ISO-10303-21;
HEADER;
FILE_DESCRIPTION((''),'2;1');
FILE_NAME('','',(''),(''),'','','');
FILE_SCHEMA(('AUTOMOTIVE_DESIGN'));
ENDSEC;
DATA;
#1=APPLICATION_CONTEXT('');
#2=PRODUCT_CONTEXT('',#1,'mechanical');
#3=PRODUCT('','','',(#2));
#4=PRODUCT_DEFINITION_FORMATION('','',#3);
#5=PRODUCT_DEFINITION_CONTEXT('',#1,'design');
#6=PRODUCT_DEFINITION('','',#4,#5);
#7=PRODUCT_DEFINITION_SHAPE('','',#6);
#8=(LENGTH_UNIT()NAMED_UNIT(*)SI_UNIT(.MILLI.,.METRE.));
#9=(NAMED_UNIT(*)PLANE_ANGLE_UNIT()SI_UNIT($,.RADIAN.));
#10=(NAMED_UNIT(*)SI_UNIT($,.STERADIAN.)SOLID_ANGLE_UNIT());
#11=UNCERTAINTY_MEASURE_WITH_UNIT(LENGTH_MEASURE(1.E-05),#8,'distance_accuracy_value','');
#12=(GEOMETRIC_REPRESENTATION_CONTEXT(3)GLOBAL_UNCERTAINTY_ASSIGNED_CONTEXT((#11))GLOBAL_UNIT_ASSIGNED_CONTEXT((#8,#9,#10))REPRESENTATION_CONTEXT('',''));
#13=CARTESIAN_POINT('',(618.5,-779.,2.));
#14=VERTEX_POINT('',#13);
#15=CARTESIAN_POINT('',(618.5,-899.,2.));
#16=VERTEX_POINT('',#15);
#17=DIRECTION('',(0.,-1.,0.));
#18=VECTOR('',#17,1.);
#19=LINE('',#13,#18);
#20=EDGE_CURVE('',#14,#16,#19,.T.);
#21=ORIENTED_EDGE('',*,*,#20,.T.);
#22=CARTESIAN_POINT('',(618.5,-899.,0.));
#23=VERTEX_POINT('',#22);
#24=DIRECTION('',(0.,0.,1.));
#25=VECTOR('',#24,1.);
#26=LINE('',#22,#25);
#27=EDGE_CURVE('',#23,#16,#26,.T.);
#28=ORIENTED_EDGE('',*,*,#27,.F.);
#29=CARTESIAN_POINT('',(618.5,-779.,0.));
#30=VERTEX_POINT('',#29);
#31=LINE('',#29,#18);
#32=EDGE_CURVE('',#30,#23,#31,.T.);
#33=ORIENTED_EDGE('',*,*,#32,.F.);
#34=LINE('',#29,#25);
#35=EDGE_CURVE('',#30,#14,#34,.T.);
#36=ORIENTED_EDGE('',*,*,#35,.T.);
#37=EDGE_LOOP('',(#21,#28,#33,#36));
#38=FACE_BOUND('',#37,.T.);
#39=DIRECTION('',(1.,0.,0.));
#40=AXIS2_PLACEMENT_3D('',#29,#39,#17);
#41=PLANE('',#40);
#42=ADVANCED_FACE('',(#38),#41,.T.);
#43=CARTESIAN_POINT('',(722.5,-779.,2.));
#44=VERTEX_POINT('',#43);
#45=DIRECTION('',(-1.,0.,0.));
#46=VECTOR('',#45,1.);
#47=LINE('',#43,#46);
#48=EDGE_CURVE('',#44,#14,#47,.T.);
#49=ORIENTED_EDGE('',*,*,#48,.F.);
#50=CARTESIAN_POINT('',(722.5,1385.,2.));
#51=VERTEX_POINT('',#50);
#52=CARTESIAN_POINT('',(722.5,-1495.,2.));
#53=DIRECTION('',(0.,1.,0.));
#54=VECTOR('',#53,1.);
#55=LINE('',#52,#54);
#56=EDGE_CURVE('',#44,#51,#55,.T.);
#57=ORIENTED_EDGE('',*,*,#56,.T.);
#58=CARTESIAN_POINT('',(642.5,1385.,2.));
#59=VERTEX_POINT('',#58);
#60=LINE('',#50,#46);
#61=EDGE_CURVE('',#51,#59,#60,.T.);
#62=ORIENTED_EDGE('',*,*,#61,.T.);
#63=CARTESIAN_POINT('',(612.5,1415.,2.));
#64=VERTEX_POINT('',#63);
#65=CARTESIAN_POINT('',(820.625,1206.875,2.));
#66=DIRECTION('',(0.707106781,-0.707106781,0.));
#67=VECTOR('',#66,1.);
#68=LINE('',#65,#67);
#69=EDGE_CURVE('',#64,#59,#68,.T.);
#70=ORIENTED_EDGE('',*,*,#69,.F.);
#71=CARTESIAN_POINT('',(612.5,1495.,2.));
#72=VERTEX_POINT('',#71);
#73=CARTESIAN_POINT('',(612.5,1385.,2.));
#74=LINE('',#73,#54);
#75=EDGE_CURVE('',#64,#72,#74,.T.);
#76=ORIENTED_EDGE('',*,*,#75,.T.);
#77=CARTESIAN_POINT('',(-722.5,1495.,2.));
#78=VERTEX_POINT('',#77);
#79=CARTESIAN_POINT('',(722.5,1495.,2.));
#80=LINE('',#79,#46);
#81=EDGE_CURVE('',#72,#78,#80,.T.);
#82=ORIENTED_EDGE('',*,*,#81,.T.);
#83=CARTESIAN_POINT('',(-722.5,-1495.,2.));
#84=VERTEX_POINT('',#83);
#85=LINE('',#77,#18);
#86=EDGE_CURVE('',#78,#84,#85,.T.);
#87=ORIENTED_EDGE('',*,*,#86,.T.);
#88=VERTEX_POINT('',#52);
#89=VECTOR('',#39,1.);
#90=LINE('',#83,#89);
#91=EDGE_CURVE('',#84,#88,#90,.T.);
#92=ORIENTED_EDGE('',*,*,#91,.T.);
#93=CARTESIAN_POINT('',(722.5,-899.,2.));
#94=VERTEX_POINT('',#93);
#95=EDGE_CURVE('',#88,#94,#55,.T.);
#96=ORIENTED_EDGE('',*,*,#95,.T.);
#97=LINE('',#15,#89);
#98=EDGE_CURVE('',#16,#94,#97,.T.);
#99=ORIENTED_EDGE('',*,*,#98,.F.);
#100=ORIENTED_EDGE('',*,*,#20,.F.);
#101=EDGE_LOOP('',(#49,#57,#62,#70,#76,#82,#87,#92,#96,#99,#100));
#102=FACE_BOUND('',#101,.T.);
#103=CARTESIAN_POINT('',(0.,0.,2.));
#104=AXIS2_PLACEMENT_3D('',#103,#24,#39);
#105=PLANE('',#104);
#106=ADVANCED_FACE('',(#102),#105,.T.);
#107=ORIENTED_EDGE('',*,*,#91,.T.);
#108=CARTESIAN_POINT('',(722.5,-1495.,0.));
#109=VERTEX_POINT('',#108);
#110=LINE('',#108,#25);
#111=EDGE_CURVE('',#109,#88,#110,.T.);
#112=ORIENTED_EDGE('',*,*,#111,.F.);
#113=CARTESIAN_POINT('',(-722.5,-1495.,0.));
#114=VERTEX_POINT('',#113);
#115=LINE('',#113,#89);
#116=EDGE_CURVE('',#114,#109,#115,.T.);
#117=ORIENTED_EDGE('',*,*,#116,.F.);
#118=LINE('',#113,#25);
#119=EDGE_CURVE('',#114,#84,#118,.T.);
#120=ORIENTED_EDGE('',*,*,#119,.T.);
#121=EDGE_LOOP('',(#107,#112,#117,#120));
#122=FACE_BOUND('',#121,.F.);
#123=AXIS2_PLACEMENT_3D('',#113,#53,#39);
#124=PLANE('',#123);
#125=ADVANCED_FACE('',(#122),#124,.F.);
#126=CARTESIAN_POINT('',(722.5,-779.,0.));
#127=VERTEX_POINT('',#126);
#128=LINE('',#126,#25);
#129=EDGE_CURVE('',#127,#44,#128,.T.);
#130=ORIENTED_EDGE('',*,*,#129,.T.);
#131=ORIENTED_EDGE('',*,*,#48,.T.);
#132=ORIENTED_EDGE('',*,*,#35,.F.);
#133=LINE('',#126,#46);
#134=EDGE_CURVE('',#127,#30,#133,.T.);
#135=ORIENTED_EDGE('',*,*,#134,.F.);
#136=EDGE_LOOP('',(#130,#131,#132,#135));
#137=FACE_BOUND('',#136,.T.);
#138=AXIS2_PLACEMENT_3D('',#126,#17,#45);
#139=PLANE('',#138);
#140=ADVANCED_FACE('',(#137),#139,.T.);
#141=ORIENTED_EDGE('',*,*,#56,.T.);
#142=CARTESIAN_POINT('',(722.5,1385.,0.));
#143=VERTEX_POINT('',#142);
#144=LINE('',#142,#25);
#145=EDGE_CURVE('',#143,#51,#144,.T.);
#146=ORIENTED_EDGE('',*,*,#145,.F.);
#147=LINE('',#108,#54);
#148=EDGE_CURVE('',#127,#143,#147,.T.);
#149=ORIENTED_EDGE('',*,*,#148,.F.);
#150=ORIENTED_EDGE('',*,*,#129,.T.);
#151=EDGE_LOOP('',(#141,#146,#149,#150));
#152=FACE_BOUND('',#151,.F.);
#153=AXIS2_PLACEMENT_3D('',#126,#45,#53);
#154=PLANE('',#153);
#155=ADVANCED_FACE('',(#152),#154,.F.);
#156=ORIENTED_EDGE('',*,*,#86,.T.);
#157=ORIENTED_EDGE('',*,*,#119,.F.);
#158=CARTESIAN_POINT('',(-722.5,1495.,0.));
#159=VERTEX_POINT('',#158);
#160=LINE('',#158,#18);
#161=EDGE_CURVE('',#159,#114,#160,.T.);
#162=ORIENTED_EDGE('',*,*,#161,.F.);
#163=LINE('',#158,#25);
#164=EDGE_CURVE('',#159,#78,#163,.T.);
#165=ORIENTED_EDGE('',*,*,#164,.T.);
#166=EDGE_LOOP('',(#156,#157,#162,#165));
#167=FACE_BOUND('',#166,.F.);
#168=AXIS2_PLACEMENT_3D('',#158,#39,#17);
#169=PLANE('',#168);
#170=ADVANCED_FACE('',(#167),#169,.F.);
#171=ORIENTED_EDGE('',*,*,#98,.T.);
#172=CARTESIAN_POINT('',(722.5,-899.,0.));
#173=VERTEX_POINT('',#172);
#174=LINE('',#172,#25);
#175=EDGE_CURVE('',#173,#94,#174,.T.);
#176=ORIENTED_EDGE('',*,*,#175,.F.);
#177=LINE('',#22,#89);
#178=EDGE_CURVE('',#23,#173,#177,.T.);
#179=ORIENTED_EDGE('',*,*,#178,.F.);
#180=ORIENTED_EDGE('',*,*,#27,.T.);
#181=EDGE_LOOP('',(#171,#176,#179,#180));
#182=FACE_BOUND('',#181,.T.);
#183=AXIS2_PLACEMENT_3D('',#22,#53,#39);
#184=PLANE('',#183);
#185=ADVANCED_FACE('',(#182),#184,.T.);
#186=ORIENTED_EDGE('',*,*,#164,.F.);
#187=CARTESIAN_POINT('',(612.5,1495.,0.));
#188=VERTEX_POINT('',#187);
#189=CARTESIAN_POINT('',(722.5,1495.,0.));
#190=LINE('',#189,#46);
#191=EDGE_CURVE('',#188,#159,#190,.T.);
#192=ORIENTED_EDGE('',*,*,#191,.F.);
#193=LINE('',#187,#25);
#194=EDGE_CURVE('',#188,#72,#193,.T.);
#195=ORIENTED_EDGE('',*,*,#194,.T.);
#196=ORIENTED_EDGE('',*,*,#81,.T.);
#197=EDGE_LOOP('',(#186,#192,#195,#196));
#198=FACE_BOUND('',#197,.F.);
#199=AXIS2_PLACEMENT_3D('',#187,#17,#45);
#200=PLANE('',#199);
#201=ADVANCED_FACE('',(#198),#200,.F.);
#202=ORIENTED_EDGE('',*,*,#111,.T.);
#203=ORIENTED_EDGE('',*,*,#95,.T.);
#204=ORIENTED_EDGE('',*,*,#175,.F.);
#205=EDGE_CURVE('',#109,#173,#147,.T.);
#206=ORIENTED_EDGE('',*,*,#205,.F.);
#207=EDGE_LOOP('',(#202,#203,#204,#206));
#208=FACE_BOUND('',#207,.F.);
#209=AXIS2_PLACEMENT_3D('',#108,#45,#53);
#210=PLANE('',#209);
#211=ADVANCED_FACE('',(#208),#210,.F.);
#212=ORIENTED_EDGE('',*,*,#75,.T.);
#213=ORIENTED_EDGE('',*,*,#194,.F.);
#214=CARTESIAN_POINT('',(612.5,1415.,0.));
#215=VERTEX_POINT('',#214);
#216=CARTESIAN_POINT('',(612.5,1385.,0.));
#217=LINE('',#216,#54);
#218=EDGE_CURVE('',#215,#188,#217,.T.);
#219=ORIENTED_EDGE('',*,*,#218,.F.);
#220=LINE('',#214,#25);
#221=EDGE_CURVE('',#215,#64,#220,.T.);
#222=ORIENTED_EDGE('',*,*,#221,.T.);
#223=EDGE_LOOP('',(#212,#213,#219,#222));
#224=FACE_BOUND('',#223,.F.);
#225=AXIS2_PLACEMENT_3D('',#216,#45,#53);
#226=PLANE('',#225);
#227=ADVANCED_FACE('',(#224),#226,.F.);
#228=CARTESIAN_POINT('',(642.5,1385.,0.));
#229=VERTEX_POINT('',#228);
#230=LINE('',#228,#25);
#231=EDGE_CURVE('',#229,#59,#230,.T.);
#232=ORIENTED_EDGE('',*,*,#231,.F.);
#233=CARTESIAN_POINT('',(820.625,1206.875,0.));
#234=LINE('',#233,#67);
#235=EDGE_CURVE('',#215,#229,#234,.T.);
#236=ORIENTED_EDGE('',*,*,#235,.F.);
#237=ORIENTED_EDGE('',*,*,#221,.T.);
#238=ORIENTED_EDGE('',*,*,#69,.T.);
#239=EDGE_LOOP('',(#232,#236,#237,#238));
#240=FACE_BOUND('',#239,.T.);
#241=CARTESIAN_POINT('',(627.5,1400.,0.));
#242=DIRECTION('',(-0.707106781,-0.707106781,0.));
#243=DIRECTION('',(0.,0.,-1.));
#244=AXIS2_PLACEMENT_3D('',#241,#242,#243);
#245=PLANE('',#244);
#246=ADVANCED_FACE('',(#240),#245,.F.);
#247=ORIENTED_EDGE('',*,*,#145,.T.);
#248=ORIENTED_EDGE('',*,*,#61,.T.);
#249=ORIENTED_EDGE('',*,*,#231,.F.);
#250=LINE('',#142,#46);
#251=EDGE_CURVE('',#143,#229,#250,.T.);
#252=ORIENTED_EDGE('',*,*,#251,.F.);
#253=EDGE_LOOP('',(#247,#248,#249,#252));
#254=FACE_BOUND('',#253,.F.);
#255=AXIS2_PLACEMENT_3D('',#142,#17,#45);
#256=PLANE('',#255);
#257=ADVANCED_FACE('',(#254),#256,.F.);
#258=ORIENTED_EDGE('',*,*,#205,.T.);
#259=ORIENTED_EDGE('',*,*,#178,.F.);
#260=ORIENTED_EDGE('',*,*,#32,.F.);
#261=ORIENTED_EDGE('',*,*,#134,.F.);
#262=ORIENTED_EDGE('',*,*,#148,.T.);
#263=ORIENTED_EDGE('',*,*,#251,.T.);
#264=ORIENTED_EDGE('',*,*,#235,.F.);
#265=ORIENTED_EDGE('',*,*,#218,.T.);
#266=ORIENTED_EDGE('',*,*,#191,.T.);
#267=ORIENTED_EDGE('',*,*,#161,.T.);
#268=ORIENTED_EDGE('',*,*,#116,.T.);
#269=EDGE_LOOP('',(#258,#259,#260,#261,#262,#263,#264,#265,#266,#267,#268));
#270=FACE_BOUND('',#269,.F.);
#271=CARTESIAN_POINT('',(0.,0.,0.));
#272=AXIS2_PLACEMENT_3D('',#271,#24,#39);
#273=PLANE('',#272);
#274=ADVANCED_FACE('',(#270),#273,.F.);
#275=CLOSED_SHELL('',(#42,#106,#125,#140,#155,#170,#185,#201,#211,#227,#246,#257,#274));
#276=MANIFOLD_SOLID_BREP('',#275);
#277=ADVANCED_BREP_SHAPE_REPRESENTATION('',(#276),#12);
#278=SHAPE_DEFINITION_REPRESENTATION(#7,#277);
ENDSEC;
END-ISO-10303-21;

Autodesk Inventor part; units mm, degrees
ref_plane "YZ Plane" through (0, 0, 0) normal (1, 0, 0) x (0, 1, 0)
ref_plane "XZ Plane" through (0, 0, 0) normal (0, 1, 0) x (-1, 0, 0)
ref_plane "XY Plane" through (0, 0, 0) normal (0, 0, 1) x (1, 0, 0)
sketch "Sketch1" plane through (0, 0, 0) normal (0, 0, 1) x (1, 0, 0)
  line L0 (-722.5, -1495) -> (722.5, -1495)
  line L1 (722.5, -1495) -> (722.5, 1495)
  line L2 (722.5, 1495) -> (-722.5, 1495)
  line L3 (-722.5, 1495) -> (-722.5, -1495)
  line L4 (-722.5, -1495) -> (722.5, 1495) construction
  line L5 (722.5, -1495) -> (-722.5, 1495) construction
  line L6 (722.5, -779) -> (618.5, -779)
  line L7 (618.5, -779) -> (618.5, -899)
  line L8 (618.5, -899) -> (722.5, -899)
  line L9 (722.5, -899) -> (722.5, -779)
  line L10 (722.5, 1385) -> (612.5, 1385)
  line L11 (612.5, 1385) -> (612.5, 1495)
  point P0 (0, 0)
  point P1 (722.5, -899)
  dimension "d154" = 1445
  dimension "d155" = 2990
  dimension "d159" = 120
  dimension "d161" = 104
  dimension "d162" = 596
  dimension "d163" = 110
extrude "Plate5" add sketch "Sketch1" along normal blind 2 contours L3 L2 L11 L10 L1 L6 L7 L8 L0
chamfer "Corner Chamfer2" distance 30 angle 45 1 edges at (612.5, 1385, 1)
properties part number "PNS-0114 floor sheet 4" material "Stainless Steel"
